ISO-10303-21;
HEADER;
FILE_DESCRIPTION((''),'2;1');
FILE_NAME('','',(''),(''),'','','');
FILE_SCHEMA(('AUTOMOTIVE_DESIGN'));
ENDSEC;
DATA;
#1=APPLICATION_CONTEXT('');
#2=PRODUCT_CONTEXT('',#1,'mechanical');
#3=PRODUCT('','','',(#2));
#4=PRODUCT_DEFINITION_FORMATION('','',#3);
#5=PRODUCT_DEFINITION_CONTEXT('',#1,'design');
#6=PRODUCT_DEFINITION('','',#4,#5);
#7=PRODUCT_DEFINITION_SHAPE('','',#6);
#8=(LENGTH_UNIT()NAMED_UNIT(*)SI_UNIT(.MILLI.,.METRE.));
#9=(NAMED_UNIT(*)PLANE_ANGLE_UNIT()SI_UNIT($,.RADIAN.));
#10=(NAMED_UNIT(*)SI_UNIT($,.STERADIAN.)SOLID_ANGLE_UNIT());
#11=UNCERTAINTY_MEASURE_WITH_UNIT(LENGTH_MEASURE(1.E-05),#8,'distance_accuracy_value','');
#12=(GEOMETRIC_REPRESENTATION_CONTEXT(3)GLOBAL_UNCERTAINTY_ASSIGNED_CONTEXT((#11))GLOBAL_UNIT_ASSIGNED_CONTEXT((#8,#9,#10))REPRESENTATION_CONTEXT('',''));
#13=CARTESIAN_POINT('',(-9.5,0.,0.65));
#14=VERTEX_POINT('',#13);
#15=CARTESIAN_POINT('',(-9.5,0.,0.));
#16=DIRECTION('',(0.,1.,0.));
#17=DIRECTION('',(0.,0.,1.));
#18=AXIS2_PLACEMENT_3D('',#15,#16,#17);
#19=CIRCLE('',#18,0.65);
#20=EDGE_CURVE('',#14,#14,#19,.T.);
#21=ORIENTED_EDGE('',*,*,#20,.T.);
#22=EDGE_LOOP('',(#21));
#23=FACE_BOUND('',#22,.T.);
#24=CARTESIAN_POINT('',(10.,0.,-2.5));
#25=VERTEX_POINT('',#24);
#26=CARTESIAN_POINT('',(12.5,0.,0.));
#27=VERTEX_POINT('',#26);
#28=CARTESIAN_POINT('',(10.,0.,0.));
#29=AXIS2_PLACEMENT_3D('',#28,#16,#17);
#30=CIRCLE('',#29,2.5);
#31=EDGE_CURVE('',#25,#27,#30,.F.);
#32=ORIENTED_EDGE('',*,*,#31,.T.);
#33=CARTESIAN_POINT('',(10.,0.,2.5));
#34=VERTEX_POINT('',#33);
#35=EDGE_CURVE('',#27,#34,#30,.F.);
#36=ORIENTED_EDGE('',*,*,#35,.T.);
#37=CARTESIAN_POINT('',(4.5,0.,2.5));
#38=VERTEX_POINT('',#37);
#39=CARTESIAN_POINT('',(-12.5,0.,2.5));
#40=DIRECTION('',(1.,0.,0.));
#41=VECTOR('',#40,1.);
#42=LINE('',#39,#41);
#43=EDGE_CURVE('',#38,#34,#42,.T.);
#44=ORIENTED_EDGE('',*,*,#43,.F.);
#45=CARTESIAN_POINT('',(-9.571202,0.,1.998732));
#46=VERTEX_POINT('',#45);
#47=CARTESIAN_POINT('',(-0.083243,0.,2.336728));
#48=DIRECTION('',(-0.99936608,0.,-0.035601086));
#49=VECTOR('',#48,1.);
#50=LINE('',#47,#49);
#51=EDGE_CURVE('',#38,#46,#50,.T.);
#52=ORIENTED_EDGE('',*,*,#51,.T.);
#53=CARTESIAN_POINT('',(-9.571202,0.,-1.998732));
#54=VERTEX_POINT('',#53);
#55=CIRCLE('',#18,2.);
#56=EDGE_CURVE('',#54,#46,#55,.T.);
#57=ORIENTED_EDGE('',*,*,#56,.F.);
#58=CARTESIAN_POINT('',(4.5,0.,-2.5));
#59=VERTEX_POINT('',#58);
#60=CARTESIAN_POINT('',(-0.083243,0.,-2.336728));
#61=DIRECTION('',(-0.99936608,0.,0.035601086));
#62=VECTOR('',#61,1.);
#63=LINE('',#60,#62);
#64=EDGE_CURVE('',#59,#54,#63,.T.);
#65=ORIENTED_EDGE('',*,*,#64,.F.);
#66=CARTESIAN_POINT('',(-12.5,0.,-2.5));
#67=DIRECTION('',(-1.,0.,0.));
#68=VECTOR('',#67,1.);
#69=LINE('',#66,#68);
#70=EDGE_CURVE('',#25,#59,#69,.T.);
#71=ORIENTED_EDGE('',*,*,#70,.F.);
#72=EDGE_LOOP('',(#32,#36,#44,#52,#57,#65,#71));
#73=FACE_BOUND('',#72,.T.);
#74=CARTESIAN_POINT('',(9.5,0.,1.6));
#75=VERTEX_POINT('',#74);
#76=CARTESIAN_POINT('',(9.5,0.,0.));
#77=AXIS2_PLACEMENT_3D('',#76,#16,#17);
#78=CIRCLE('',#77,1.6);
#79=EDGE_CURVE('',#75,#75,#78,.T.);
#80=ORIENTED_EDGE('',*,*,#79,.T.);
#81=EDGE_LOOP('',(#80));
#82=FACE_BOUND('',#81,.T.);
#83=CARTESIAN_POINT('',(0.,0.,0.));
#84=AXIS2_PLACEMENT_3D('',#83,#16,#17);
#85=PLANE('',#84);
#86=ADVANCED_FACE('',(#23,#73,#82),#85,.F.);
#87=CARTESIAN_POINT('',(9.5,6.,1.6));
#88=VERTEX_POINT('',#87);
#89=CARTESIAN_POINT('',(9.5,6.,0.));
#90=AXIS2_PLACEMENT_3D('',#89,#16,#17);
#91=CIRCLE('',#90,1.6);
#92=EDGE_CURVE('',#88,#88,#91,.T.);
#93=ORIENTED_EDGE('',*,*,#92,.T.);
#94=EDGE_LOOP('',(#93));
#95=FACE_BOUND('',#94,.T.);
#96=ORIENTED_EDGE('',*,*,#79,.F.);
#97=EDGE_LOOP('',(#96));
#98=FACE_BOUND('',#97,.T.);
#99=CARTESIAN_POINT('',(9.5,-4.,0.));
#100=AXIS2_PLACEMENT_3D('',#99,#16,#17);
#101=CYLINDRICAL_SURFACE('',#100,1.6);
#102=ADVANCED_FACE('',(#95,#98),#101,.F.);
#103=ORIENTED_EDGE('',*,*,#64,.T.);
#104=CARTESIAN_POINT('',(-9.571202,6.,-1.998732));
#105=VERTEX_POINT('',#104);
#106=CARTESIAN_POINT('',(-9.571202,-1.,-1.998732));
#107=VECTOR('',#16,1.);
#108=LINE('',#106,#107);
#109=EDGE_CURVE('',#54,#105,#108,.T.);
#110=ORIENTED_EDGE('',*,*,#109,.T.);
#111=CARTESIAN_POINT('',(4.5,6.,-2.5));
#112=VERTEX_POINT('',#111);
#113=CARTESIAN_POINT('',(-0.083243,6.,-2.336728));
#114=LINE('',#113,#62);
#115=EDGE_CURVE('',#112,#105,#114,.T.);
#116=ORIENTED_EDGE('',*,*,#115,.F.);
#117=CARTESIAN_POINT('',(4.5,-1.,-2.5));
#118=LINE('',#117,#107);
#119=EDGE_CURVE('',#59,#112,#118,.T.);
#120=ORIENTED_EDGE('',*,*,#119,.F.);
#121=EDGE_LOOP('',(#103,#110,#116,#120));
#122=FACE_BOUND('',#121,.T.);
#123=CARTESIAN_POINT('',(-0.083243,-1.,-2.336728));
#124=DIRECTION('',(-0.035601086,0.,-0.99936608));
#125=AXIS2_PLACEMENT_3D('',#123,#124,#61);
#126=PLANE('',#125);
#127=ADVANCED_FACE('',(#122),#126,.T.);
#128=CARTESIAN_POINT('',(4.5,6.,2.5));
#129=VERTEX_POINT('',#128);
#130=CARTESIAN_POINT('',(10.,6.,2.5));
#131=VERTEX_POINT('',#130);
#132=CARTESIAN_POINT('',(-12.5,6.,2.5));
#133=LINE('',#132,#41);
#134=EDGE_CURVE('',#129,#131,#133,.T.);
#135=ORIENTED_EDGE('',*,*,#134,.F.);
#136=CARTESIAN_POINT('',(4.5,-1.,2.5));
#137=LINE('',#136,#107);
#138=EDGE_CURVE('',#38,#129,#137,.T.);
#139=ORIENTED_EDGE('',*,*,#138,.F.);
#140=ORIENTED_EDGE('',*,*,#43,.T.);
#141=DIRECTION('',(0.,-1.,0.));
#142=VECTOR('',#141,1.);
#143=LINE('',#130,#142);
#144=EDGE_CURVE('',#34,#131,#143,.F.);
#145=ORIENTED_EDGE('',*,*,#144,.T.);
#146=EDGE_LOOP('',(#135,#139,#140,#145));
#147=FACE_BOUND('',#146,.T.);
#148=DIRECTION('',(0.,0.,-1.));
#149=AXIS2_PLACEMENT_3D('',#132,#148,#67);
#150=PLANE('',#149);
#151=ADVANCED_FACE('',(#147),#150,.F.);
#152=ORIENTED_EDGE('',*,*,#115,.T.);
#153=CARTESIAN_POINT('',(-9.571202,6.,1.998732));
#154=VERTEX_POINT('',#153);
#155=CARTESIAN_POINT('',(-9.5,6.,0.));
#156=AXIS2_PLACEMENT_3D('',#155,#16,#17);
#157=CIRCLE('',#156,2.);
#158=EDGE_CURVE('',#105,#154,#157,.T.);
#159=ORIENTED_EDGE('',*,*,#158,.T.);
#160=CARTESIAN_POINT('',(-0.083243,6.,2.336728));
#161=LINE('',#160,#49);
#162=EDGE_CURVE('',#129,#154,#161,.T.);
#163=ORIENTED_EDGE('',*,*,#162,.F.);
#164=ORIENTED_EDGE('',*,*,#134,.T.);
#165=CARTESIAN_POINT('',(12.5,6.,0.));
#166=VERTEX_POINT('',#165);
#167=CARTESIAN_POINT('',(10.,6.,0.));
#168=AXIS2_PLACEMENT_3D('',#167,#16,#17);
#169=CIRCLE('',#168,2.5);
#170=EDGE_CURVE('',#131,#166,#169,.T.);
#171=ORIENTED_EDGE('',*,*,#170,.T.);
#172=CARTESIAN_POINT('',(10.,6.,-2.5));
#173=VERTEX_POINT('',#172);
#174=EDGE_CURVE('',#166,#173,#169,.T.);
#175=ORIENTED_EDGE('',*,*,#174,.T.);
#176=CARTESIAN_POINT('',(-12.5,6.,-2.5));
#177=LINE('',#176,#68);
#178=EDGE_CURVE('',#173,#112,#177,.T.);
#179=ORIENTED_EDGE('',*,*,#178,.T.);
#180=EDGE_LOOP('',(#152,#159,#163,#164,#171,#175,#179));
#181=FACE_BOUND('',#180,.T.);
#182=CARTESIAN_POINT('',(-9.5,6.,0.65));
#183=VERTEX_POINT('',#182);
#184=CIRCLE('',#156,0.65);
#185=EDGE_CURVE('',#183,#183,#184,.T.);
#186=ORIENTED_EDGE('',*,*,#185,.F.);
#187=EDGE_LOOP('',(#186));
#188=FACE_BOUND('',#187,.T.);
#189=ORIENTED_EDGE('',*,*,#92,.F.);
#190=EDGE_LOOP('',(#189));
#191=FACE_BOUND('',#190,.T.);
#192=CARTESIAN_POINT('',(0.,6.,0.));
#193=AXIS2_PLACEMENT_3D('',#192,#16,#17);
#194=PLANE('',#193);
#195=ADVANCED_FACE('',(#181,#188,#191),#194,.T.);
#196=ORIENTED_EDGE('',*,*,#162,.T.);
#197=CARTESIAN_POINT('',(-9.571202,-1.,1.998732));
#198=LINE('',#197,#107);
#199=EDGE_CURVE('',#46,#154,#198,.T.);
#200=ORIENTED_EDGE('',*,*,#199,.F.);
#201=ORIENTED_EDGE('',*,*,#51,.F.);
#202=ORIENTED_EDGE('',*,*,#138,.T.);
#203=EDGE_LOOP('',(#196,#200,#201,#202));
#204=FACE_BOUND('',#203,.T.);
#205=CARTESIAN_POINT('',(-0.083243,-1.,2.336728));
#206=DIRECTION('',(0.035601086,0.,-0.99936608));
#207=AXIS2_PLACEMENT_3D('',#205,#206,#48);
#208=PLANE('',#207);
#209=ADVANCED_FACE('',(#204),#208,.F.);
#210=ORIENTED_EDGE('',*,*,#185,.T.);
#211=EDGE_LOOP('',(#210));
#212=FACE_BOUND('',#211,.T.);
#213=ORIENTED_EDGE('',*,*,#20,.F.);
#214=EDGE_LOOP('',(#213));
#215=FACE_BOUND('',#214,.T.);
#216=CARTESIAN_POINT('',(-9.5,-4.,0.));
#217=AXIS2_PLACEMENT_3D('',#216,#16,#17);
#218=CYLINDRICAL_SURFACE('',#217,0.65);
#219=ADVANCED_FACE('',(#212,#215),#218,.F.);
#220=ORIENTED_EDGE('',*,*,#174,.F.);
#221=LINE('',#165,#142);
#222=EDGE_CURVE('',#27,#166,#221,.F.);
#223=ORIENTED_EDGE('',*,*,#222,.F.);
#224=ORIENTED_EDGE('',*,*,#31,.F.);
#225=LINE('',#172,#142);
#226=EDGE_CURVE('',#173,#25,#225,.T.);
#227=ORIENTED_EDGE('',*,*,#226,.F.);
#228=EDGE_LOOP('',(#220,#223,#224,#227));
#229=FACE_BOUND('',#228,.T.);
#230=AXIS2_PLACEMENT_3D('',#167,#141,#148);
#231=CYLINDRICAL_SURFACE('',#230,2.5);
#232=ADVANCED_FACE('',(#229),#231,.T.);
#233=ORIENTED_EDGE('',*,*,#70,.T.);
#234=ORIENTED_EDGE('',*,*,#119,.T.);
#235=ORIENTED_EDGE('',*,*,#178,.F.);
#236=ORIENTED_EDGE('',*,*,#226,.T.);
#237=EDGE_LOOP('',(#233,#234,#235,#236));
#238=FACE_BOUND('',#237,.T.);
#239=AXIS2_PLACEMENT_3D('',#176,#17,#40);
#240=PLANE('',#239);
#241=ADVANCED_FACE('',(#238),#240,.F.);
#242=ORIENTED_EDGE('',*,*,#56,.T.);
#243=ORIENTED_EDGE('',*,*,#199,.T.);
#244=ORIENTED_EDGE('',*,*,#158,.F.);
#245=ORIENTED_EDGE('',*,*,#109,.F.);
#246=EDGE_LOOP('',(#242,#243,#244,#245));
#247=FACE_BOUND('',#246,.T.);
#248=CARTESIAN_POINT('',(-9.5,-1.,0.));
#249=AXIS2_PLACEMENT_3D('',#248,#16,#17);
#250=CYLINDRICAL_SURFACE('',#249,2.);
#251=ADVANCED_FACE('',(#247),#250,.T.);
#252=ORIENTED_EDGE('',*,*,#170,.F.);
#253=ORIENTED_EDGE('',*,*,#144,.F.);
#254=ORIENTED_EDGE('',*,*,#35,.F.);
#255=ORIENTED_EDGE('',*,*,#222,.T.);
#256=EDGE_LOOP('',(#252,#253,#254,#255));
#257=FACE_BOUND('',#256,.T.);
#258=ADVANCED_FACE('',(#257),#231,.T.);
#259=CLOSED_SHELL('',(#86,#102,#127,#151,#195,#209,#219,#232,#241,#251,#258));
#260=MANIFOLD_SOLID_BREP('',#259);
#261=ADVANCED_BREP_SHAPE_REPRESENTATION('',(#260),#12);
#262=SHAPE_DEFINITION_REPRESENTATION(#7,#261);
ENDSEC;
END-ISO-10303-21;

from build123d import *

# Parameters (mm, degrees)
SKETCH_1_W          = 25
SKETCH_1_H          = 5
EXTRUDE_1_DEPTH     = 6
SKETCH_2_R          = 1.6
SKETCH_2_R_2        = 0.65
CUT_EXTRUDE_1_DEPTH = 10
FILLET_1_R          = 2.5
CUT_EXTRUDE_2_DEPTH = 7


with BuildPart() as part:
    # 草图1 → 凸台-拉伸1 (new body)
    with BuildSketch(Plane(origin=(0, 0, 0), x_dir=(1, 0, 0), z_dir=(0, 1, 0))):
        Rectangle(SKETCH_1_W, SKETCH_1_H)
    extrude(amount=EXTRUDE_1_DEPTH)

    # 草图2 → 切除-拉伸1 (cut)
    with BuildSketch(Plane(origin=(0, 6, 0), x_dir=(1, 0, 0), z_dir=(0, 1, 0))):
        with Locations(Location((9.5, 0, 0), (0, 0, 270))):
            Circle(SKETCH_2_R)
        with Locations(Location((-9.5, 0, 0), (0, 0, 270))):
            Circle(SKETCH_2_R_2)
    extrude(amount=-CUT_EXTRUDE_1_DEPTH, mode=Mode.SUBTRACT)

    # 圆角1
    fillet_1_edges = [part.edges().sort_by_distance(p)[0] for p in [
        (12.5, 3, 2.5),
        (12.5, 3, -2.5),
        (-12.5, 3, 2.5),
        (-12.5, 3, -2.5),
    ]]
    fillet(fillet_1_edges, radius=FILLET_1_R - 0.0001)  # a hair under: the kernel refuses the full size

    # 草图3 → 切除-拉伸2 (cut)
    with BuildSketch(Plane(origin=(0, 6, 0), x_dir=(1, 0, 0), z_dir=(0, 1, 0))):
        with BuildLine():
            Line((-9.571202172, 1.998732161), (4.5, 2.5))
            Line((4.5, 2.5), (-10, 2.5))
            ThreePointArc((-10, 2.5), (-11.767766953, 1.767766953), (-12.5, 0))
            ThreePointArc((-12.5, 0), (-11.767766953, -1.767766953), (-10, -2.5))
            Line((-10, -2.5), (4.5, -2.5))
            Line((4.5, -2.5), (-9.571202172, -1.998732161))
            ThreePointArc((-9.571202172, -1.998732161), (-11.5, 0), (-9.571202172, 1.998732161))
        make_face()
    extrude(amount=-CUT_EXTRUDE_2_DEPTH, mode=Mode.SUBTRACT)


with BuildPart() as cut_extrude_2_kept_piece:
    # of the separate pieces the step leaves, the one the design keeps (cut_extrude_2_pieces_kept)
    add(part.part.solids().sort_by_distance((4.5, 0, -2.5))[0])


solid = cut_extrude_2_kept_piece.part
